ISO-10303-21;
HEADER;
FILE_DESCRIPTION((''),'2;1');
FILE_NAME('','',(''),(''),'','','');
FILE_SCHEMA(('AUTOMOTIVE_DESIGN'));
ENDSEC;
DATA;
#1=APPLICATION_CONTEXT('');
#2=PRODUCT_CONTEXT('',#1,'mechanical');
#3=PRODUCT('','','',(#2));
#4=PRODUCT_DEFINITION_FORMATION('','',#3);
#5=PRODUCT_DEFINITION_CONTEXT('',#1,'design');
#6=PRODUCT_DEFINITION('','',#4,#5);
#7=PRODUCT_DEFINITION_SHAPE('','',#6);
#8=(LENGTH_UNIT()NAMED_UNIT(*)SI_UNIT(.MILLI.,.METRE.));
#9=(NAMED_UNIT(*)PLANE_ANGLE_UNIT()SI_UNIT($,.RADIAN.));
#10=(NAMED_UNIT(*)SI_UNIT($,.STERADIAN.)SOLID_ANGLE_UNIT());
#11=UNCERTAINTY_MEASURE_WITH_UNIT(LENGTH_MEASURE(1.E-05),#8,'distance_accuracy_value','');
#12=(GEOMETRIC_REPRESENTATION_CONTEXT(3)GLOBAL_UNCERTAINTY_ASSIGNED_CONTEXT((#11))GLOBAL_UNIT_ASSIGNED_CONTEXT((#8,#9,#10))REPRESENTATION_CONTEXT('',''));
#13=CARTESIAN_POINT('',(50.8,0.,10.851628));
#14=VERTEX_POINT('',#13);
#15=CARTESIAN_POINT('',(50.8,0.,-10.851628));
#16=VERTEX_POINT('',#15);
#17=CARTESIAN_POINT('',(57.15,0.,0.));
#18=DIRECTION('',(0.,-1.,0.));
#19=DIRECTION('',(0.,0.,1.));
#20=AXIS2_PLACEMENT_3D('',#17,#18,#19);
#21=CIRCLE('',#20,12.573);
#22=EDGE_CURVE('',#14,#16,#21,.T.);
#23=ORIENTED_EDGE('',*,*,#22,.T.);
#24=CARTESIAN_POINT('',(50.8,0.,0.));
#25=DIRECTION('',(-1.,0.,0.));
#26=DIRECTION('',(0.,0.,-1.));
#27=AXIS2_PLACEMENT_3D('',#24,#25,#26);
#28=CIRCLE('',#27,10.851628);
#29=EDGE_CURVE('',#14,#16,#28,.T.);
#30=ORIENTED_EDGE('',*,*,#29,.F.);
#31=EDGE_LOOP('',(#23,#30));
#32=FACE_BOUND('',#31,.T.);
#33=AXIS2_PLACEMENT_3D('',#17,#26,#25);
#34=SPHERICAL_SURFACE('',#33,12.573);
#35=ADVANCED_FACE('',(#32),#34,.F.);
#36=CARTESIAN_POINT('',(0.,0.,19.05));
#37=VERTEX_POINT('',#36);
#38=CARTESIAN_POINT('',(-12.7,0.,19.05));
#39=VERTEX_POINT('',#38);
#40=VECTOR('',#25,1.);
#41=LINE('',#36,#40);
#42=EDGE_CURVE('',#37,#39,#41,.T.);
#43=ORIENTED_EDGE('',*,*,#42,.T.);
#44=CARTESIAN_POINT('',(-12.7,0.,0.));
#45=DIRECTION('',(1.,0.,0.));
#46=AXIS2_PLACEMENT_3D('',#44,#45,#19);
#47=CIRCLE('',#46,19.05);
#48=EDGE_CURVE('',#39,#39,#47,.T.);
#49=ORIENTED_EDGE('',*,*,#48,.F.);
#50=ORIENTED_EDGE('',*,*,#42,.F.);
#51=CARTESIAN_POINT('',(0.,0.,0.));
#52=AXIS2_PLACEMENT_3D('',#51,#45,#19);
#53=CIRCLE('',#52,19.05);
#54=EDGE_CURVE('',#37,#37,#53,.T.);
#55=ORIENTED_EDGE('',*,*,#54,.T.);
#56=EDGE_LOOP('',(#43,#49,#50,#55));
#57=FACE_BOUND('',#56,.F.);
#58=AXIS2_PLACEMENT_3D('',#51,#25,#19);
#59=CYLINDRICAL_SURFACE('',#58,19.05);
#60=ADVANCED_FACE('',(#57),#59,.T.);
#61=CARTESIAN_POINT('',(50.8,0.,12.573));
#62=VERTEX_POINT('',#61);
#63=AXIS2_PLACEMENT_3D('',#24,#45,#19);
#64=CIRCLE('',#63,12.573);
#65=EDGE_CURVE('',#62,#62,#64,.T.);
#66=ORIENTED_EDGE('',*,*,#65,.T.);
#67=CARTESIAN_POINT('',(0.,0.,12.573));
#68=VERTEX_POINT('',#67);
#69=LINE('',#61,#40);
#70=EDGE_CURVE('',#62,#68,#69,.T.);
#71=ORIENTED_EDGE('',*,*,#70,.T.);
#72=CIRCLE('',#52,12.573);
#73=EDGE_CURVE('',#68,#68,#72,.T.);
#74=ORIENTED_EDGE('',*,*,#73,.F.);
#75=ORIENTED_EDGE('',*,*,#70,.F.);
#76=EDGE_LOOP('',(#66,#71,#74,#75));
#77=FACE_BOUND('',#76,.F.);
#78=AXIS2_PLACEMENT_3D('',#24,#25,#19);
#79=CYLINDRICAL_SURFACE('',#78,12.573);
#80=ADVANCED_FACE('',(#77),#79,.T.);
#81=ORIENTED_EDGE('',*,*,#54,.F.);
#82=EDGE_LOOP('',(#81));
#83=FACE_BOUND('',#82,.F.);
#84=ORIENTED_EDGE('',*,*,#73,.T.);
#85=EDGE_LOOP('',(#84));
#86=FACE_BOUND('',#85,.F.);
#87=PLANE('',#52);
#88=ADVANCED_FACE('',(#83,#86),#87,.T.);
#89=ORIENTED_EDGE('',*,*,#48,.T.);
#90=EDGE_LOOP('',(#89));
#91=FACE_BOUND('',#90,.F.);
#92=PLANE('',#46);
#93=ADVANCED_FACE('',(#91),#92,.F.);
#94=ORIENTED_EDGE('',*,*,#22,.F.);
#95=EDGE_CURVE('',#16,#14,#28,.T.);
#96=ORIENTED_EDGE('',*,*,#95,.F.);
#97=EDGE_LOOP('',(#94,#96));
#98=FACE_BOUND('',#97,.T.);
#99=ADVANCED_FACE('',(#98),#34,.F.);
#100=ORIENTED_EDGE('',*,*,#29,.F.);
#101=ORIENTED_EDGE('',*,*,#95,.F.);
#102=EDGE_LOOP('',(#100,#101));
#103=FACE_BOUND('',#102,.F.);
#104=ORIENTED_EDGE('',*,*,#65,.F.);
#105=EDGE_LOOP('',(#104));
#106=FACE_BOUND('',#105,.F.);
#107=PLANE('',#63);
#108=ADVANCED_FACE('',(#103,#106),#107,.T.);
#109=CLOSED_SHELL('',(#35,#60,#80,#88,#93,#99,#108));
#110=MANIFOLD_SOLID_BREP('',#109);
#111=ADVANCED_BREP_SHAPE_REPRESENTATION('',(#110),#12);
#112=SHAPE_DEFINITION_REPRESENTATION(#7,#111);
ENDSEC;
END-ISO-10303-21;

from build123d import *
from build123d import SkipClean  # not in build123d's __all__


with BuildPart() as f1:
    # F0 (on Front) → F1 (revolve)
    with BuildSketch(Plane.XZ):
        Polygon((0, 19.05), (-12.7, 19.05), (-12.7, 0), (0, 0), (50.8, 0), (50.8, 12.573), (0, 12.573), align=None)
    revolve(axis=Axis((25.4, 0, 0), (1, 0, 0)))

    # F2 (on Front) → F3 (revolve, cut)
    with BuildSketch(Plane.XZ):
        with BuildLine():
            Line((57.15, 0), (57.15, 12.573))
            ThreePointArc((57.15, 12.573), (44.577, 0), (57.15, -12.573))
            Line((57.15, -12.573), (57.15, 0))
        make_face()
    with SkipClean():  # cleaning this boolean's faces spoils the solid; the shape is the same uncleaned
        revolve(axis=Axis((57.15, 0, 0), (0, 0, 1)), mode=Mode.SUBTRACT)


solid = f1.part
